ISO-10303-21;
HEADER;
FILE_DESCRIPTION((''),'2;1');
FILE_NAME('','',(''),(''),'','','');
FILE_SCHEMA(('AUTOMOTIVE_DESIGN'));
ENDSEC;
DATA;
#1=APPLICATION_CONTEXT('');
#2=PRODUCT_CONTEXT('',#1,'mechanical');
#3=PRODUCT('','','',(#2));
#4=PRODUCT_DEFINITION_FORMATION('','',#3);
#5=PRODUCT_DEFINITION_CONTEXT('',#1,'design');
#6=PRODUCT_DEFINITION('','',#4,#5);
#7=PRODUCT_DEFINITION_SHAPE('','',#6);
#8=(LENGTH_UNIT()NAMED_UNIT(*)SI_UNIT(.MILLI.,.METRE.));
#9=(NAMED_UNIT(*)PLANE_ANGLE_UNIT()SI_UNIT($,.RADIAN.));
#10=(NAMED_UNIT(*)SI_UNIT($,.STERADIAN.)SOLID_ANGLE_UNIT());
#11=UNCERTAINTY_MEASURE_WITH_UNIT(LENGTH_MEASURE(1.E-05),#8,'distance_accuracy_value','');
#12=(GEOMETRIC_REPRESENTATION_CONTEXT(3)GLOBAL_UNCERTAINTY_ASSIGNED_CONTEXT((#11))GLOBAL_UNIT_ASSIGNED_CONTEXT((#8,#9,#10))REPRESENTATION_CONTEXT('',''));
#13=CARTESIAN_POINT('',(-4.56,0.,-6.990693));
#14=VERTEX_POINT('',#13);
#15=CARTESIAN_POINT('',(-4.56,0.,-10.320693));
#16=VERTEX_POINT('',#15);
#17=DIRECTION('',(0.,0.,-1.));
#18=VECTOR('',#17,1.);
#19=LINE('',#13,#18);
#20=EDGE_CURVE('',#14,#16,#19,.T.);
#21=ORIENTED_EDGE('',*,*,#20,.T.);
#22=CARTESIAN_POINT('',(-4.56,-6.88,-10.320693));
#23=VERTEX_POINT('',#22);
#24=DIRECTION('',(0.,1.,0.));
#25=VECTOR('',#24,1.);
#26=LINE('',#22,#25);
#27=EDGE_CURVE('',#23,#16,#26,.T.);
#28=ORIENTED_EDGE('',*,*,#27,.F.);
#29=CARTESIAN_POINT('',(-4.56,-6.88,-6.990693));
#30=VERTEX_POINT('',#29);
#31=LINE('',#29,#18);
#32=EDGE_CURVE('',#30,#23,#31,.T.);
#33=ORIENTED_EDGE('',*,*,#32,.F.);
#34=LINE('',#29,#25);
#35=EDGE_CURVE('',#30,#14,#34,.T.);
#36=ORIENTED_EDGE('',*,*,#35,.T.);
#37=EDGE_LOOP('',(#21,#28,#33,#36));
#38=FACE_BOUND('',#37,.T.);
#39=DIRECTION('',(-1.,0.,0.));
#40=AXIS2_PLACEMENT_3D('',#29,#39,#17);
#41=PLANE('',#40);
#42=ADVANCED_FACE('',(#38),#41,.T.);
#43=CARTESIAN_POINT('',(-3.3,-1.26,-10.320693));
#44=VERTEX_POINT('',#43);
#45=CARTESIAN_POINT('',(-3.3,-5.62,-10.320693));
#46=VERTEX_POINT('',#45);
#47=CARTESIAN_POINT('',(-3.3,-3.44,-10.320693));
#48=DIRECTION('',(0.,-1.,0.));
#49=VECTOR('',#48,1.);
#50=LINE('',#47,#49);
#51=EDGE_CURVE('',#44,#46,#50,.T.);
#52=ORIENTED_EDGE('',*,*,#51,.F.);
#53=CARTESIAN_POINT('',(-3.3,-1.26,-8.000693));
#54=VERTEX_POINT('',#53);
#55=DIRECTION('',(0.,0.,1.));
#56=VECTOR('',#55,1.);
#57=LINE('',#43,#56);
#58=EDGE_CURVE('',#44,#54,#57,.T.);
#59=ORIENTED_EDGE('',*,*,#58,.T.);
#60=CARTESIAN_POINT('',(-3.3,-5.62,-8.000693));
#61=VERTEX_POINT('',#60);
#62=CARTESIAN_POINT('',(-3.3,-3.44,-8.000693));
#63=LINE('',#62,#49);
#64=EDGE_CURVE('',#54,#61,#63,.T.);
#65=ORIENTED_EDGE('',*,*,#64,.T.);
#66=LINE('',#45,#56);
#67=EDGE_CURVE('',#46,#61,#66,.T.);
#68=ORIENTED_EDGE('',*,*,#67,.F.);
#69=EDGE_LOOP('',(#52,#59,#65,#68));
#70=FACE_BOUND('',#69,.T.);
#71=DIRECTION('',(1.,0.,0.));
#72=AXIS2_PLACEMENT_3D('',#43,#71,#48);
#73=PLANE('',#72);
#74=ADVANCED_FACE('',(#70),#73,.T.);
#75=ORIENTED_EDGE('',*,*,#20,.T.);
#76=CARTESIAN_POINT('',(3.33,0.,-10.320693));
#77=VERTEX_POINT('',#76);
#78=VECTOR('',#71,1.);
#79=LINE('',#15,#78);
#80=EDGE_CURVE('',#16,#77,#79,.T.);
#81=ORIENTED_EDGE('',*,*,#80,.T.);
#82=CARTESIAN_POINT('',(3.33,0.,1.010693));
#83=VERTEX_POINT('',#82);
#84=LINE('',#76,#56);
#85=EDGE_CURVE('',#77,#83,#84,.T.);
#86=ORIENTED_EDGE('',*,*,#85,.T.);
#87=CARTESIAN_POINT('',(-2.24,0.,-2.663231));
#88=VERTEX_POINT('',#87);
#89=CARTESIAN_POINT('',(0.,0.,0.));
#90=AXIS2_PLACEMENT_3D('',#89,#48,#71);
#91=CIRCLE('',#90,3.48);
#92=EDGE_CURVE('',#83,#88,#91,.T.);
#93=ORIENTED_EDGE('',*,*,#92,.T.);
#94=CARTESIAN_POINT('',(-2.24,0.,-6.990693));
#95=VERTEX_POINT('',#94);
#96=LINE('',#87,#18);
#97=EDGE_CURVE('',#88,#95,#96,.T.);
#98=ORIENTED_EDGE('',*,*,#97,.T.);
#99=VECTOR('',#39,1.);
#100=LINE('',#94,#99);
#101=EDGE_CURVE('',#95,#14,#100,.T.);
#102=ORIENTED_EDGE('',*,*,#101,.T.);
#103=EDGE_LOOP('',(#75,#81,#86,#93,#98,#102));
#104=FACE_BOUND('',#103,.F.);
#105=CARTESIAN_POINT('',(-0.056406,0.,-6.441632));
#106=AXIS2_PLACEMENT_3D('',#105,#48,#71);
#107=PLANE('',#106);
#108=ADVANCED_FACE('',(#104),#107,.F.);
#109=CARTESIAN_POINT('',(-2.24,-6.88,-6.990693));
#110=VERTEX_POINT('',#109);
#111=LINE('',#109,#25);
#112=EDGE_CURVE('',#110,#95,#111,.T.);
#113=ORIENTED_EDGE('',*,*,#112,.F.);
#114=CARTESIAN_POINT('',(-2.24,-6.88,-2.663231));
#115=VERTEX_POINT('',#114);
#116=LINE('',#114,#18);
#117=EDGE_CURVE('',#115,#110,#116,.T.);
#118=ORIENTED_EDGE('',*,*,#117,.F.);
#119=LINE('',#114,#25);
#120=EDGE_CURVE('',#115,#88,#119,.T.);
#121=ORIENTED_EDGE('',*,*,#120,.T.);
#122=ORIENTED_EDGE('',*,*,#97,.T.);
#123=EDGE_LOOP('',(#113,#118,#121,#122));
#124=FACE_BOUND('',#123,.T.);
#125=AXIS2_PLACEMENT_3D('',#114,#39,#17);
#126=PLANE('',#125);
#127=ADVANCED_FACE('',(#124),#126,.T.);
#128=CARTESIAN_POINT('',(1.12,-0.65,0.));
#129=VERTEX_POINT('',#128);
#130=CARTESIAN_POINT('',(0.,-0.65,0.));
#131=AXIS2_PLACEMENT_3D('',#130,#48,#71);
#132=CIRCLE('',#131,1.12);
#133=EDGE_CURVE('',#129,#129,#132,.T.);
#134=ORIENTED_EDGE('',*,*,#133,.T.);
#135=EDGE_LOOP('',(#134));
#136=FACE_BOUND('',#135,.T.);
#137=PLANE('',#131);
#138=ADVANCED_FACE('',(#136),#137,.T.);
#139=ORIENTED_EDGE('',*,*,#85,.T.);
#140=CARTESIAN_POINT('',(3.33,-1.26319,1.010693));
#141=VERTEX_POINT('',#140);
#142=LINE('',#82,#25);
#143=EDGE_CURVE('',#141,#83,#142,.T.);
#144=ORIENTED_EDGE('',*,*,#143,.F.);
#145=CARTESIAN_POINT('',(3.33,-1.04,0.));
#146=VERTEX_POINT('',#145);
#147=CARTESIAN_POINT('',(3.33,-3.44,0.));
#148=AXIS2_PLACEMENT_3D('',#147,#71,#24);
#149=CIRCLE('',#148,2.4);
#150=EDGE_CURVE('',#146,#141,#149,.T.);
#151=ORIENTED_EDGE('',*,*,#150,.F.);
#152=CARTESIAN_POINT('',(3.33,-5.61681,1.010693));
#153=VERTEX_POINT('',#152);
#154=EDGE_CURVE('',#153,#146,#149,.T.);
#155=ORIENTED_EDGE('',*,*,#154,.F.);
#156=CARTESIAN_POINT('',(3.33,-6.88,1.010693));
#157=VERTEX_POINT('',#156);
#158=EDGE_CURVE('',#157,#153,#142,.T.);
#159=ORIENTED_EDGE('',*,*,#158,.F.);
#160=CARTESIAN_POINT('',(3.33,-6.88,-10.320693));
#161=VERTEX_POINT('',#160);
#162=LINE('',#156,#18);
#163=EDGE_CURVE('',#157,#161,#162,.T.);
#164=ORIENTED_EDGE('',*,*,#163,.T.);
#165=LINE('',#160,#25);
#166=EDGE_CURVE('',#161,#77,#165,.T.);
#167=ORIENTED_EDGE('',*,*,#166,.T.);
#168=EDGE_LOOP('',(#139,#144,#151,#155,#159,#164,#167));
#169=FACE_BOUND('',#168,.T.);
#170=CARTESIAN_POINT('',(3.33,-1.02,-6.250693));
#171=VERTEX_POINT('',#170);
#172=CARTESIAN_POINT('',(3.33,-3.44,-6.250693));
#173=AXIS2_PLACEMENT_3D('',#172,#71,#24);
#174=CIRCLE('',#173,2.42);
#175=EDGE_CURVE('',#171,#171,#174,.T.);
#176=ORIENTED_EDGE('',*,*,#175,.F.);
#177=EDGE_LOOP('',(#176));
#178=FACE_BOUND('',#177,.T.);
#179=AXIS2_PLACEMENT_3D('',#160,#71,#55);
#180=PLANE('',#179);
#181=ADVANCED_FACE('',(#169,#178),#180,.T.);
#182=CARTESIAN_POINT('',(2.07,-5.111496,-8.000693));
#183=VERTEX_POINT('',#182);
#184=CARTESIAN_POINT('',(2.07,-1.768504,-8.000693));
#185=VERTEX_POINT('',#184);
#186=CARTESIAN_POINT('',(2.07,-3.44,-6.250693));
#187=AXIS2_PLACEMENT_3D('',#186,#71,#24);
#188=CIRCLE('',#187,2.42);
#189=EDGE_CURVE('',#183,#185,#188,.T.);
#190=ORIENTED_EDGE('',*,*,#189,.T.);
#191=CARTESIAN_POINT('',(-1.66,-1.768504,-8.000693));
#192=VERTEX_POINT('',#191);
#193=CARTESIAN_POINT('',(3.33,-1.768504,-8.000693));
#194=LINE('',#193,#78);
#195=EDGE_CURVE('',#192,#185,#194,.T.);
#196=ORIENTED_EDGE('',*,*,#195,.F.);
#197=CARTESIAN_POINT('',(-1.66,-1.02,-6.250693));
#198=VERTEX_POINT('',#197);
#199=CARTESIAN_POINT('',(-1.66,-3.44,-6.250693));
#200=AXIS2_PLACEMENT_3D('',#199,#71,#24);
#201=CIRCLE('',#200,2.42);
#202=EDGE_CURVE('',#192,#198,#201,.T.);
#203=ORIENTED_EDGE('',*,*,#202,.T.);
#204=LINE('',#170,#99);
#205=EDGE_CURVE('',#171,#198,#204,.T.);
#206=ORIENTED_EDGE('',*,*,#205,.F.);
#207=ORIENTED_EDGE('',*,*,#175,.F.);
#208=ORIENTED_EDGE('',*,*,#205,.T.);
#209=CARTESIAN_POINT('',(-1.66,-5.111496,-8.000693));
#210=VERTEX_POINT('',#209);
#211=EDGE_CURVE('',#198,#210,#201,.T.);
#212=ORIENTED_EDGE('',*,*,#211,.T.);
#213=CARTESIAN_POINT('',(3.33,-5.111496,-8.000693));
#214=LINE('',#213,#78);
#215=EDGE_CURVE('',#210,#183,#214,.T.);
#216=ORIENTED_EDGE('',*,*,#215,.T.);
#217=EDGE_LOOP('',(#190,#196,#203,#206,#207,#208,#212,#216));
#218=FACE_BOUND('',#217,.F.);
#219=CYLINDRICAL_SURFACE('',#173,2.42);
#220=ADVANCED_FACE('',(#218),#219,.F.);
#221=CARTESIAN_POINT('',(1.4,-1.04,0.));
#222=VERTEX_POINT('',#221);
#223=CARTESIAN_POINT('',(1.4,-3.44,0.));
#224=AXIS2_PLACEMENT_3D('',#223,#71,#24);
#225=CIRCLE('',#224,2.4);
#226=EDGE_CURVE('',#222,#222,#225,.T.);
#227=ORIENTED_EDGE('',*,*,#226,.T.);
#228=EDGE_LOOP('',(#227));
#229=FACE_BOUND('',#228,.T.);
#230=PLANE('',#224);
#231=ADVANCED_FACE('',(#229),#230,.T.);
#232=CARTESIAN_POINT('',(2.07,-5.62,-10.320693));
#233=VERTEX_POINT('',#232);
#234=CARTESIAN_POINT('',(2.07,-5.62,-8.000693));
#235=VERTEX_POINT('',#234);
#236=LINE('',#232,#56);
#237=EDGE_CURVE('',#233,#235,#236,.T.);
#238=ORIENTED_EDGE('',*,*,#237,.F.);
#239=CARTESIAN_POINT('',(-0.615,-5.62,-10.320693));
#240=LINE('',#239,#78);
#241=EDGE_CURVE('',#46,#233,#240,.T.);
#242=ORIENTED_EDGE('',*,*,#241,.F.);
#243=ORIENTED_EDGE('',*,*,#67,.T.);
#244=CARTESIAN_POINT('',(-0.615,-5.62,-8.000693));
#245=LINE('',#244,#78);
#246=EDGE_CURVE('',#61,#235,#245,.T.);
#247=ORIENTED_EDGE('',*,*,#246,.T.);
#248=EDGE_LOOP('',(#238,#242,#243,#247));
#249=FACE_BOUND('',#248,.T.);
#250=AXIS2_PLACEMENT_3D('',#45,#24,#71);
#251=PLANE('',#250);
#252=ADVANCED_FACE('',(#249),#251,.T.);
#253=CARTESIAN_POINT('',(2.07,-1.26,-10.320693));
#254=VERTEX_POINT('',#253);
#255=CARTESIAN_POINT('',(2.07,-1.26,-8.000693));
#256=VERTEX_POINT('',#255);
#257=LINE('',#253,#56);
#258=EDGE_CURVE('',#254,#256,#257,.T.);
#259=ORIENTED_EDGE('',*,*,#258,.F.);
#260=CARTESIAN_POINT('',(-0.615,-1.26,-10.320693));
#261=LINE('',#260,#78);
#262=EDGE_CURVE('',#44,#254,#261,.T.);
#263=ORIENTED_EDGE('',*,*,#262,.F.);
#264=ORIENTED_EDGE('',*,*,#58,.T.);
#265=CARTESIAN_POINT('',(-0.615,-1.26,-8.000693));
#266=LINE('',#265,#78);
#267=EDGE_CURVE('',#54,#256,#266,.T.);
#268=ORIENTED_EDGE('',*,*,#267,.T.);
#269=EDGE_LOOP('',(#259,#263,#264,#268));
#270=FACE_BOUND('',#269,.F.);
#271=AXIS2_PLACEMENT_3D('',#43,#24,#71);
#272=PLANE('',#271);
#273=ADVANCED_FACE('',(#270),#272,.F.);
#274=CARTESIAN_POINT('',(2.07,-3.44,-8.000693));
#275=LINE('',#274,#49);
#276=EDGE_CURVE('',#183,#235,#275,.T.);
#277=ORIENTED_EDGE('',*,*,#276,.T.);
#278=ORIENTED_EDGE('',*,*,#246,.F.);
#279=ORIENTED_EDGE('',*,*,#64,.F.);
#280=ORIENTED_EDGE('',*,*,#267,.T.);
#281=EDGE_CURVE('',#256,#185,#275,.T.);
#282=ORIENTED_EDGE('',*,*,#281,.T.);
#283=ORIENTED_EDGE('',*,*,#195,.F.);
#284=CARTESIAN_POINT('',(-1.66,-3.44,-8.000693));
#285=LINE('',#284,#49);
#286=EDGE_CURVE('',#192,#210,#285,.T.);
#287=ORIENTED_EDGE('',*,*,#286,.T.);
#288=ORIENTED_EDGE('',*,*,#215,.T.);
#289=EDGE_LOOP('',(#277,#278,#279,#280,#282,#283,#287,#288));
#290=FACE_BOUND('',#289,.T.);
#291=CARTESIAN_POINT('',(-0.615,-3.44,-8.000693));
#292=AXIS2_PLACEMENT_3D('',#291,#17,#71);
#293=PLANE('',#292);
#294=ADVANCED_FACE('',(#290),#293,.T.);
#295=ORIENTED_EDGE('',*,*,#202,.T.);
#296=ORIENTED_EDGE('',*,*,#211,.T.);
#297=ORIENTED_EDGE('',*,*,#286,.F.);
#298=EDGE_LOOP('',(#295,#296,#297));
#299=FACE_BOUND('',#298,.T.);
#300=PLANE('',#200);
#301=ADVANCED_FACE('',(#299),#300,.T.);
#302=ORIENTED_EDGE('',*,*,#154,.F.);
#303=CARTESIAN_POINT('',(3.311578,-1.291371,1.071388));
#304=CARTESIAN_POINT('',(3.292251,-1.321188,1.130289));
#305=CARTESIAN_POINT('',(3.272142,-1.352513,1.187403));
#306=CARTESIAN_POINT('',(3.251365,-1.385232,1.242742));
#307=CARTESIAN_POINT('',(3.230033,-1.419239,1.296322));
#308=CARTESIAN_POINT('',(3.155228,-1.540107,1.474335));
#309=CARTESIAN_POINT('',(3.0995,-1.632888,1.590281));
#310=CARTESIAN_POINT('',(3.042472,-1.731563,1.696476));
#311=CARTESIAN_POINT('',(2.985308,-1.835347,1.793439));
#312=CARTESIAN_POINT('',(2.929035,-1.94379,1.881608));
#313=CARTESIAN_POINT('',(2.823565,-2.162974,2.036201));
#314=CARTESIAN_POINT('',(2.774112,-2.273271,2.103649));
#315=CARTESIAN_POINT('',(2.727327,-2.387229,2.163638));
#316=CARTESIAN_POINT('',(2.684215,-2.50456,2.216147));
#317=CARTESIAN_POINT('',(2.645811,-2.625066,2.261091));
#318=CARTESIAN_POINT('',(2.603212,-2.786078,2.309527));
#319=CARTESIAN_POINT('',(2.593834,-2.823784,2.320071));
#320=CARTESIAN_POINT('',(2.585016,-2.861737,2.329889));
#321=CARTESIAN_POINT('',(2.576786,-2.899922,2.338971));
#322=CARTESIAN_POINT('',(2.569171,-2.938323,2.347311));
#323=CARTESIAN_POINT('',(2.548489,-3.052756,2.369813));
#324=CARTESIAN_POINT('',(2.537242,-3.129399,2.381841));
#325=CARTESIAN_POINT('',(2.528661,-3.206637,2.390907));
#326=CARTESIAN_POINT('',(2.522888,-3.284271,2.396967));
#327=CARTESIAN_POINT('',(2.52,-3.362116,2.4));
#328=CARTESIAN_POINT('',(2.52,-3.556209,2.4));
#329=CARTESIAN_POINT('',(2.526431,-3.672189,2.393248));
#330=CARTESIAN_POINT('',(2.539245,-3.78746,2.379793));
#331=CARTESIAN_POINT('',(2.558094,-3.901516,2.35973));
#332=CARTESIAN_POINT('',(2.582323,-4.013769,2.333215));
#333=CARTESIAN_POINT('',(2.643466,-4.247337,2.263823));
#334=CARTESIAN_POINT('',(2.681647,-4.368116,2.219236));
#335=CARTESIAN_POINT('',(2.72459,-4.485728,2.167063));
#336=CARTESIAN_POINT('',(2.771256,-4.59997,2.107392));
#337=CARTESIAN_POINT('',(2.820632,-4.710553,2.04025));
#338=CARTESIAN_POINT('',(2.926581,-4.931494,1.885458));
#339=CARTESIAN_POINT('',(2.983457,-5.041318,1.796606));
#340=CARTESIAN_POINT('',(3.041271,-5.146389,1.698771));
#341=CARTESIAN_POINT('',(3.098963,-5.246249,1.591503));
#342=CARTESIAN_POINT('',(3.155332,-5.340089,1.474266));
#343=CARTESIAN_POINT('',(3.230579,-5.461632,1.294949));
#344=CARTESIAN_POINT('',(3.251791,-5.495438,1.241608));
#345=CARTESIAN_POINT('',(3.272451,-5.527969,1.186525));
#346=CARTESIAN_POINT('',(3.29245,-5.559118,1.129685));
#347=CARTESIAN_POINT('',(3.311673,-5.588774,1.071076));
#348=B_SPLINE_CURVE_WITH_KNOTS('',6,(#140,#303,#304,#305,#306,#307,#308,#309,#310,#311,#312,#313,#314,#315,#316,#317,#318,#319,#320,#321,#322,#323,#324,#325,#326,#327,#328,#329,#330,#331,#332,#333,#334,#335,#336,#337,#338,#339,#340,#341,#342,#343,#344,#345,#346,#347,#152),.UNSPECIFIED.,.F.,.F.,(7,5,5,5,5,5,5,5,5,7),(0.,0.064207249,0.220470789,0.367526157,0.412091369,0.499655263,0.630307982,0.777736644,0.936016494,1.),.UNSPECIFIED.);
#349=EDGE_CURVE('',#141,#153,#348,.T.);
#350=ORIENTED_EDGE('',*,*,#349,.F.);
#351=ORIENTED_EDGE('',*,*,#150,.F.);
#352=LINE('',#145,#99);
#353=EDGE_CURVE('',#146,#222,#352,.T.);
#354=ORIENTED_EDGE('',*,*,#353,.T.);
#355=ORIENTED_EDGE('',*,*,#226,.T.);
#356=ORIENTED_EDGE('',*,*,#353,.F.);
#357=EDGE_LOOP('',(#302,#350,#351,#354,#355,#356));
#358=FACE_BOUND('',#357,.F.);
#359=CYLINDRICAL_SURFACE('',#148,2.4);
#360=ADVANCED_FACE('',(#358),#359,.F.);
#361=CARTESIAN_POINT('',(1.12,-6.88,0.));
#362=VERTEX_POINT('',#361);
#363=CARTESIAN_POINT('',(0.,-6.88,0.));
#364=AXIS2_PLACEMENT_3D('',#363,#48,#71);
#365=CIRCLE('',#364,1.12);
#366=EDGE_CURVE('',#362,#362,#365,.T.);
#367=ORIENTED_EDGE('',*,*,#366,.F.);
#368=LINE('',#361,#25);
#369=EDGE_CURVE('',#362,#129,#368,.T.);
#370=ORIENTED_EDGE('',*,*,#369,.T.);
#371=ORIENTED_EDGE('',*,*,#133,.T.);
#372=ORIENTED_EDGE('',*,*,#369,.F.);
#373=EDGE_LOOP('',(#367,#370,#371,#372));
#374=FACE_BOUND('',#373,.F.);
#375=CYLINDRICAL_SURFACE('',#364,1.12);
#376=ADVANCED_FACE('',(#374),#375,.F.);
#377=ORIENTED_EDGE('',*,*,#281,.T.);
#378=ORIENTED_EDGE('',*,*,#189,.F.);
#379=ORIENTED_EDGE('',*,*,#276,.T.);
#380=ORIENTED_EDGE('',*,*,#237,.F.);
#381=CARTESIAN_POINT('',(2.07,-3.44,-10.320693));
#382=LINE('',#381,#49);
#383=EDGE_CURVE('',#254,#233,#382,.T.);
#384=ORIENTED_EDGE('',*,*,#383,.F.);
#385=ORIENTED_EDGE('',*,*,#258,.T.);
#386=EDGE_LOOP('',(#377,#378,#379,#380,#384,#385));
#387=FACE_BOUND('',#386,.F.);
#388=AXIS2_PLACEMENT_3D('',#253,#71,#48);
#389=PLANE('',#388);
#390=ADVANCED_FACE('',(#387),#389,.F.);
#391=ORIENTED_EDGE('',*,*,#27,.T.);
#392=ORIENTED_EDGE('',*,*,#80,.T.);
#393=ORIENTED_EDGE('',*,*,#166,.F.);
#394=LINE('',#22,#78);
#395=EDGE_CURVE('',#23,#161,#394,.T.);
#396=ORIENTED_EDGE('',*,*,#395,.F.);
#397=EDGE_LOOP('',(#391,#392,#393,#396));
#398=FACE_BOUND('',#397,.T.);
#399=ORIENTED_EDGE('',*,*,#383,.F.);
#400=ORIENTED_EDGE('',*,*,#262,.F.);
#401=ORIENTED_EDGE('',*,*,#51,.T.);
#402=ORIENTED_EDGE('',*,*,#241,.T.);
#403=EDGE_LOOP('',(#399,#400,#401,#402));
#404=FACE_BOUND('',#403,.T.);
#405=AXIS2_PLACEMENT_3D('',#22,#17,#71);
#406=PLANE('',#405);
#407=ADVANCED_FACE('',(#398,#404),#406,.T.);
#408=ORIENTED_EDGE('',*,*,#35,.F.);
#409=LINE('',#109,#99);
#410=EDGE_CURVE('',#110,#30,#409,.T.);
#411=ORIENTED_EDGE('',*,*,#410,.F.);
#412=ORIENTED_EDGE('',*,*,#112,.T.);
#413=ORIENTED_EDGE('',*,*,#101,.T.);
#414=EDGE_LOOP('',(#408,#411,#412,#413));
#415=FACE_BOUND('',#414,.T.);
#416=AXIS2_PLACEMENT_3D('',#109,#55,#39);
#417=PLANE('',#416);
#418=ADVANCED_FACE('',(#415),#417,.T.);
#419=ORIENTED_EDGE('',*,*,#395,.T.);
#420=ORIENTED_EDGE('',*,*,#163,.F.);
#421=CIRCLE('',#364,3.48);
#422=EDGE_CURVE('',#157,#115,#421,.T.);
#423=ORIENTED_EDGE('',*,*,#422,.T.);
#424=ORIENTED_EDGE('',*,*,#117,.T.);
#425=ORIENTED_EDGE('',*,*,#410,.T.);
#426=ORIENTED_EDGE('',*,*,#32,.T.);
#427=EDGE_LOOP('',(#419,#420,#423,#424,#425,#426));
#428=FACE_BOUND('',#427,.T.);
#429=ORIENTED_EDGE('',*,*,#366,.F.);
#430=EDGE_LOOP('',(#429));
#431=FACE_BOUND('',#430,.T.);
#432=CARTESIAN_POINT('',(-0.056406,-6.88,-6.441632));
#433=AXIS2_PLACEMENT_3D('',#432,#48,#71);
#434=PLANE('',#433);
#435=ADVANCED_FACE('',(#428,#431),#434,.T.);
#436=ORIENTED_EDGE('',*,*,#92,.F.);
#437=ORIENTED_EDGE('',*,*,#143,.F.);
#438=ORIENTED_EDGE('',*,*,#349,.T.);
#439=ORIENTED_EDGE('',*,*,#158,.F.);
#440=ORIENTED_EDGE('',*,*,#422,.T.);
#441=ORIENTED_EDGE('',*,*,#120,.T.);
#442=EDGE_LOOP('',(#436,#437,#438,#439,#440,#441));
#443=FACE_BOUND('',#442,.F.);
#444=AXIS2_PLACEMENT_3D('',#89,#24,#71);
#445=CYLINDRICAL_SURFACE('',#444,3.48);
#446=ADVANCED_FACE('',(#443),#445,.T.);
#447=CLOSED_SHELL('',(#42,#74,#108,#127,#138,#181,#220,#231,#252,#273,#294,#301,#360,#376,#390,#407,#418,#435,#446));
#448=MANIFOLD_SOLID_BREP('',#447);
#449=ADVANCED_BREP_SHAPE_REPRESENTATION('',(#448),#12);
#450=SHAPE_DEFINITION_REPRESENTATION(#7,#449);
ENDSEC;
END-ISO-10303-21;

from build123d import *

# Parameters (mm, degrees)
F0_R      = 3.48
F1_DEPTH  = 6.88
F2_R      = 1.12
F3_DEPTH  = 6.23
F5_DEPTH  = 25
F7_DEPTH  = 6.88
F8_W      = 5.37
F8_H      = 4.36
F9_DEPTH  = 2.32
F10_R     = 2.4
F11_DEPTH = 1.93
F12_R     = 2.42
F13_DEPTH = 4.99


# Not quite as in the source:
# - a feature names something its author has since deleted; it is built from what else it names


with BuildPart() as f1:
    # F0 (on Front) → F1 (new body)
    with BuildSketch(Plane.XZ):
        Circle(F0_R)
    extrude(amount=F1_DEPTH)

    # F2 (on face) → F3 (cut)
    with BuildSketch(Plane.XZ.offset(6.88)):
        Circle(F2_R)
    extrude(amount=-F3_DEPTH, mode=Mode.SUBTRACT)

    # F4 (on face) → F5 (cut)
    with BuildSketch(Plane.XZ.offset(6.88)):
        Polygon((7.0880088024, -1.4447768917), (3.33, 4.3651785166), (3.33, -5.8573421486), align=None)
    extrude(amount=-F5_DEPTH, mode=Mode.SUBTRACT)

    # F6 (on face) → F7 (join)
    with BuildSketch(Plane.XZ.offset(6.88)):
        with BuildLine():
            Line((3.33, -10.3206928317), (3.33, -1.0106928317))
            ThreePointArc((3.33, -1.0106928317), (0.8809060484, -2.9691576427), (-2.24, -2.6632311203))
            Line((-2.24, -2.6632311203), (-2.24, -6.9906928317))
            Line((-2.24, -6.9906928317), (-4.56, -6.9906928317))
            Line((-4.56, -6.9906928317), (-4.56, -10.3206928317))
            Line((-4.56, -10.3206928317), (3.33, -10.3206928317))
        make_face()
    extrude(amount=-F7_DEPTH)

    # F8 (on face) → F9 (cut)
    with BuildSketch(Plane(origin=(0, 0, -10.3206928317), x_dir=(1, 0, 0), z_dir=(0, 0, -1))):
        with Locations((-0.615, 3.44)):
            Rectangle(F8_W, F8_H)
    extrude(amount=-F9_DEPTH, mode=Mode.SUBTRACT)

    # F10 (on face) → F11 (cut)
    with BuildSketch(Plane.YZ.offset(3.33)):
        with Locations((-3.44, 0)):
            Circle(F10_R)
    extrude(amount=-F11_DEPTH, mode=Mode.SUBTRACT)

    # F12 (on face) → F13 (cut)
    with BuildSketch(Plane.YZ.offset(3.33)):
        with Locations((-3.44, -6.2506928317)):
            Circle(F12_R)
    extrude(amount=-F13_DEPTH, mode=Mode.SUBTRACT)


solid = f1.part
